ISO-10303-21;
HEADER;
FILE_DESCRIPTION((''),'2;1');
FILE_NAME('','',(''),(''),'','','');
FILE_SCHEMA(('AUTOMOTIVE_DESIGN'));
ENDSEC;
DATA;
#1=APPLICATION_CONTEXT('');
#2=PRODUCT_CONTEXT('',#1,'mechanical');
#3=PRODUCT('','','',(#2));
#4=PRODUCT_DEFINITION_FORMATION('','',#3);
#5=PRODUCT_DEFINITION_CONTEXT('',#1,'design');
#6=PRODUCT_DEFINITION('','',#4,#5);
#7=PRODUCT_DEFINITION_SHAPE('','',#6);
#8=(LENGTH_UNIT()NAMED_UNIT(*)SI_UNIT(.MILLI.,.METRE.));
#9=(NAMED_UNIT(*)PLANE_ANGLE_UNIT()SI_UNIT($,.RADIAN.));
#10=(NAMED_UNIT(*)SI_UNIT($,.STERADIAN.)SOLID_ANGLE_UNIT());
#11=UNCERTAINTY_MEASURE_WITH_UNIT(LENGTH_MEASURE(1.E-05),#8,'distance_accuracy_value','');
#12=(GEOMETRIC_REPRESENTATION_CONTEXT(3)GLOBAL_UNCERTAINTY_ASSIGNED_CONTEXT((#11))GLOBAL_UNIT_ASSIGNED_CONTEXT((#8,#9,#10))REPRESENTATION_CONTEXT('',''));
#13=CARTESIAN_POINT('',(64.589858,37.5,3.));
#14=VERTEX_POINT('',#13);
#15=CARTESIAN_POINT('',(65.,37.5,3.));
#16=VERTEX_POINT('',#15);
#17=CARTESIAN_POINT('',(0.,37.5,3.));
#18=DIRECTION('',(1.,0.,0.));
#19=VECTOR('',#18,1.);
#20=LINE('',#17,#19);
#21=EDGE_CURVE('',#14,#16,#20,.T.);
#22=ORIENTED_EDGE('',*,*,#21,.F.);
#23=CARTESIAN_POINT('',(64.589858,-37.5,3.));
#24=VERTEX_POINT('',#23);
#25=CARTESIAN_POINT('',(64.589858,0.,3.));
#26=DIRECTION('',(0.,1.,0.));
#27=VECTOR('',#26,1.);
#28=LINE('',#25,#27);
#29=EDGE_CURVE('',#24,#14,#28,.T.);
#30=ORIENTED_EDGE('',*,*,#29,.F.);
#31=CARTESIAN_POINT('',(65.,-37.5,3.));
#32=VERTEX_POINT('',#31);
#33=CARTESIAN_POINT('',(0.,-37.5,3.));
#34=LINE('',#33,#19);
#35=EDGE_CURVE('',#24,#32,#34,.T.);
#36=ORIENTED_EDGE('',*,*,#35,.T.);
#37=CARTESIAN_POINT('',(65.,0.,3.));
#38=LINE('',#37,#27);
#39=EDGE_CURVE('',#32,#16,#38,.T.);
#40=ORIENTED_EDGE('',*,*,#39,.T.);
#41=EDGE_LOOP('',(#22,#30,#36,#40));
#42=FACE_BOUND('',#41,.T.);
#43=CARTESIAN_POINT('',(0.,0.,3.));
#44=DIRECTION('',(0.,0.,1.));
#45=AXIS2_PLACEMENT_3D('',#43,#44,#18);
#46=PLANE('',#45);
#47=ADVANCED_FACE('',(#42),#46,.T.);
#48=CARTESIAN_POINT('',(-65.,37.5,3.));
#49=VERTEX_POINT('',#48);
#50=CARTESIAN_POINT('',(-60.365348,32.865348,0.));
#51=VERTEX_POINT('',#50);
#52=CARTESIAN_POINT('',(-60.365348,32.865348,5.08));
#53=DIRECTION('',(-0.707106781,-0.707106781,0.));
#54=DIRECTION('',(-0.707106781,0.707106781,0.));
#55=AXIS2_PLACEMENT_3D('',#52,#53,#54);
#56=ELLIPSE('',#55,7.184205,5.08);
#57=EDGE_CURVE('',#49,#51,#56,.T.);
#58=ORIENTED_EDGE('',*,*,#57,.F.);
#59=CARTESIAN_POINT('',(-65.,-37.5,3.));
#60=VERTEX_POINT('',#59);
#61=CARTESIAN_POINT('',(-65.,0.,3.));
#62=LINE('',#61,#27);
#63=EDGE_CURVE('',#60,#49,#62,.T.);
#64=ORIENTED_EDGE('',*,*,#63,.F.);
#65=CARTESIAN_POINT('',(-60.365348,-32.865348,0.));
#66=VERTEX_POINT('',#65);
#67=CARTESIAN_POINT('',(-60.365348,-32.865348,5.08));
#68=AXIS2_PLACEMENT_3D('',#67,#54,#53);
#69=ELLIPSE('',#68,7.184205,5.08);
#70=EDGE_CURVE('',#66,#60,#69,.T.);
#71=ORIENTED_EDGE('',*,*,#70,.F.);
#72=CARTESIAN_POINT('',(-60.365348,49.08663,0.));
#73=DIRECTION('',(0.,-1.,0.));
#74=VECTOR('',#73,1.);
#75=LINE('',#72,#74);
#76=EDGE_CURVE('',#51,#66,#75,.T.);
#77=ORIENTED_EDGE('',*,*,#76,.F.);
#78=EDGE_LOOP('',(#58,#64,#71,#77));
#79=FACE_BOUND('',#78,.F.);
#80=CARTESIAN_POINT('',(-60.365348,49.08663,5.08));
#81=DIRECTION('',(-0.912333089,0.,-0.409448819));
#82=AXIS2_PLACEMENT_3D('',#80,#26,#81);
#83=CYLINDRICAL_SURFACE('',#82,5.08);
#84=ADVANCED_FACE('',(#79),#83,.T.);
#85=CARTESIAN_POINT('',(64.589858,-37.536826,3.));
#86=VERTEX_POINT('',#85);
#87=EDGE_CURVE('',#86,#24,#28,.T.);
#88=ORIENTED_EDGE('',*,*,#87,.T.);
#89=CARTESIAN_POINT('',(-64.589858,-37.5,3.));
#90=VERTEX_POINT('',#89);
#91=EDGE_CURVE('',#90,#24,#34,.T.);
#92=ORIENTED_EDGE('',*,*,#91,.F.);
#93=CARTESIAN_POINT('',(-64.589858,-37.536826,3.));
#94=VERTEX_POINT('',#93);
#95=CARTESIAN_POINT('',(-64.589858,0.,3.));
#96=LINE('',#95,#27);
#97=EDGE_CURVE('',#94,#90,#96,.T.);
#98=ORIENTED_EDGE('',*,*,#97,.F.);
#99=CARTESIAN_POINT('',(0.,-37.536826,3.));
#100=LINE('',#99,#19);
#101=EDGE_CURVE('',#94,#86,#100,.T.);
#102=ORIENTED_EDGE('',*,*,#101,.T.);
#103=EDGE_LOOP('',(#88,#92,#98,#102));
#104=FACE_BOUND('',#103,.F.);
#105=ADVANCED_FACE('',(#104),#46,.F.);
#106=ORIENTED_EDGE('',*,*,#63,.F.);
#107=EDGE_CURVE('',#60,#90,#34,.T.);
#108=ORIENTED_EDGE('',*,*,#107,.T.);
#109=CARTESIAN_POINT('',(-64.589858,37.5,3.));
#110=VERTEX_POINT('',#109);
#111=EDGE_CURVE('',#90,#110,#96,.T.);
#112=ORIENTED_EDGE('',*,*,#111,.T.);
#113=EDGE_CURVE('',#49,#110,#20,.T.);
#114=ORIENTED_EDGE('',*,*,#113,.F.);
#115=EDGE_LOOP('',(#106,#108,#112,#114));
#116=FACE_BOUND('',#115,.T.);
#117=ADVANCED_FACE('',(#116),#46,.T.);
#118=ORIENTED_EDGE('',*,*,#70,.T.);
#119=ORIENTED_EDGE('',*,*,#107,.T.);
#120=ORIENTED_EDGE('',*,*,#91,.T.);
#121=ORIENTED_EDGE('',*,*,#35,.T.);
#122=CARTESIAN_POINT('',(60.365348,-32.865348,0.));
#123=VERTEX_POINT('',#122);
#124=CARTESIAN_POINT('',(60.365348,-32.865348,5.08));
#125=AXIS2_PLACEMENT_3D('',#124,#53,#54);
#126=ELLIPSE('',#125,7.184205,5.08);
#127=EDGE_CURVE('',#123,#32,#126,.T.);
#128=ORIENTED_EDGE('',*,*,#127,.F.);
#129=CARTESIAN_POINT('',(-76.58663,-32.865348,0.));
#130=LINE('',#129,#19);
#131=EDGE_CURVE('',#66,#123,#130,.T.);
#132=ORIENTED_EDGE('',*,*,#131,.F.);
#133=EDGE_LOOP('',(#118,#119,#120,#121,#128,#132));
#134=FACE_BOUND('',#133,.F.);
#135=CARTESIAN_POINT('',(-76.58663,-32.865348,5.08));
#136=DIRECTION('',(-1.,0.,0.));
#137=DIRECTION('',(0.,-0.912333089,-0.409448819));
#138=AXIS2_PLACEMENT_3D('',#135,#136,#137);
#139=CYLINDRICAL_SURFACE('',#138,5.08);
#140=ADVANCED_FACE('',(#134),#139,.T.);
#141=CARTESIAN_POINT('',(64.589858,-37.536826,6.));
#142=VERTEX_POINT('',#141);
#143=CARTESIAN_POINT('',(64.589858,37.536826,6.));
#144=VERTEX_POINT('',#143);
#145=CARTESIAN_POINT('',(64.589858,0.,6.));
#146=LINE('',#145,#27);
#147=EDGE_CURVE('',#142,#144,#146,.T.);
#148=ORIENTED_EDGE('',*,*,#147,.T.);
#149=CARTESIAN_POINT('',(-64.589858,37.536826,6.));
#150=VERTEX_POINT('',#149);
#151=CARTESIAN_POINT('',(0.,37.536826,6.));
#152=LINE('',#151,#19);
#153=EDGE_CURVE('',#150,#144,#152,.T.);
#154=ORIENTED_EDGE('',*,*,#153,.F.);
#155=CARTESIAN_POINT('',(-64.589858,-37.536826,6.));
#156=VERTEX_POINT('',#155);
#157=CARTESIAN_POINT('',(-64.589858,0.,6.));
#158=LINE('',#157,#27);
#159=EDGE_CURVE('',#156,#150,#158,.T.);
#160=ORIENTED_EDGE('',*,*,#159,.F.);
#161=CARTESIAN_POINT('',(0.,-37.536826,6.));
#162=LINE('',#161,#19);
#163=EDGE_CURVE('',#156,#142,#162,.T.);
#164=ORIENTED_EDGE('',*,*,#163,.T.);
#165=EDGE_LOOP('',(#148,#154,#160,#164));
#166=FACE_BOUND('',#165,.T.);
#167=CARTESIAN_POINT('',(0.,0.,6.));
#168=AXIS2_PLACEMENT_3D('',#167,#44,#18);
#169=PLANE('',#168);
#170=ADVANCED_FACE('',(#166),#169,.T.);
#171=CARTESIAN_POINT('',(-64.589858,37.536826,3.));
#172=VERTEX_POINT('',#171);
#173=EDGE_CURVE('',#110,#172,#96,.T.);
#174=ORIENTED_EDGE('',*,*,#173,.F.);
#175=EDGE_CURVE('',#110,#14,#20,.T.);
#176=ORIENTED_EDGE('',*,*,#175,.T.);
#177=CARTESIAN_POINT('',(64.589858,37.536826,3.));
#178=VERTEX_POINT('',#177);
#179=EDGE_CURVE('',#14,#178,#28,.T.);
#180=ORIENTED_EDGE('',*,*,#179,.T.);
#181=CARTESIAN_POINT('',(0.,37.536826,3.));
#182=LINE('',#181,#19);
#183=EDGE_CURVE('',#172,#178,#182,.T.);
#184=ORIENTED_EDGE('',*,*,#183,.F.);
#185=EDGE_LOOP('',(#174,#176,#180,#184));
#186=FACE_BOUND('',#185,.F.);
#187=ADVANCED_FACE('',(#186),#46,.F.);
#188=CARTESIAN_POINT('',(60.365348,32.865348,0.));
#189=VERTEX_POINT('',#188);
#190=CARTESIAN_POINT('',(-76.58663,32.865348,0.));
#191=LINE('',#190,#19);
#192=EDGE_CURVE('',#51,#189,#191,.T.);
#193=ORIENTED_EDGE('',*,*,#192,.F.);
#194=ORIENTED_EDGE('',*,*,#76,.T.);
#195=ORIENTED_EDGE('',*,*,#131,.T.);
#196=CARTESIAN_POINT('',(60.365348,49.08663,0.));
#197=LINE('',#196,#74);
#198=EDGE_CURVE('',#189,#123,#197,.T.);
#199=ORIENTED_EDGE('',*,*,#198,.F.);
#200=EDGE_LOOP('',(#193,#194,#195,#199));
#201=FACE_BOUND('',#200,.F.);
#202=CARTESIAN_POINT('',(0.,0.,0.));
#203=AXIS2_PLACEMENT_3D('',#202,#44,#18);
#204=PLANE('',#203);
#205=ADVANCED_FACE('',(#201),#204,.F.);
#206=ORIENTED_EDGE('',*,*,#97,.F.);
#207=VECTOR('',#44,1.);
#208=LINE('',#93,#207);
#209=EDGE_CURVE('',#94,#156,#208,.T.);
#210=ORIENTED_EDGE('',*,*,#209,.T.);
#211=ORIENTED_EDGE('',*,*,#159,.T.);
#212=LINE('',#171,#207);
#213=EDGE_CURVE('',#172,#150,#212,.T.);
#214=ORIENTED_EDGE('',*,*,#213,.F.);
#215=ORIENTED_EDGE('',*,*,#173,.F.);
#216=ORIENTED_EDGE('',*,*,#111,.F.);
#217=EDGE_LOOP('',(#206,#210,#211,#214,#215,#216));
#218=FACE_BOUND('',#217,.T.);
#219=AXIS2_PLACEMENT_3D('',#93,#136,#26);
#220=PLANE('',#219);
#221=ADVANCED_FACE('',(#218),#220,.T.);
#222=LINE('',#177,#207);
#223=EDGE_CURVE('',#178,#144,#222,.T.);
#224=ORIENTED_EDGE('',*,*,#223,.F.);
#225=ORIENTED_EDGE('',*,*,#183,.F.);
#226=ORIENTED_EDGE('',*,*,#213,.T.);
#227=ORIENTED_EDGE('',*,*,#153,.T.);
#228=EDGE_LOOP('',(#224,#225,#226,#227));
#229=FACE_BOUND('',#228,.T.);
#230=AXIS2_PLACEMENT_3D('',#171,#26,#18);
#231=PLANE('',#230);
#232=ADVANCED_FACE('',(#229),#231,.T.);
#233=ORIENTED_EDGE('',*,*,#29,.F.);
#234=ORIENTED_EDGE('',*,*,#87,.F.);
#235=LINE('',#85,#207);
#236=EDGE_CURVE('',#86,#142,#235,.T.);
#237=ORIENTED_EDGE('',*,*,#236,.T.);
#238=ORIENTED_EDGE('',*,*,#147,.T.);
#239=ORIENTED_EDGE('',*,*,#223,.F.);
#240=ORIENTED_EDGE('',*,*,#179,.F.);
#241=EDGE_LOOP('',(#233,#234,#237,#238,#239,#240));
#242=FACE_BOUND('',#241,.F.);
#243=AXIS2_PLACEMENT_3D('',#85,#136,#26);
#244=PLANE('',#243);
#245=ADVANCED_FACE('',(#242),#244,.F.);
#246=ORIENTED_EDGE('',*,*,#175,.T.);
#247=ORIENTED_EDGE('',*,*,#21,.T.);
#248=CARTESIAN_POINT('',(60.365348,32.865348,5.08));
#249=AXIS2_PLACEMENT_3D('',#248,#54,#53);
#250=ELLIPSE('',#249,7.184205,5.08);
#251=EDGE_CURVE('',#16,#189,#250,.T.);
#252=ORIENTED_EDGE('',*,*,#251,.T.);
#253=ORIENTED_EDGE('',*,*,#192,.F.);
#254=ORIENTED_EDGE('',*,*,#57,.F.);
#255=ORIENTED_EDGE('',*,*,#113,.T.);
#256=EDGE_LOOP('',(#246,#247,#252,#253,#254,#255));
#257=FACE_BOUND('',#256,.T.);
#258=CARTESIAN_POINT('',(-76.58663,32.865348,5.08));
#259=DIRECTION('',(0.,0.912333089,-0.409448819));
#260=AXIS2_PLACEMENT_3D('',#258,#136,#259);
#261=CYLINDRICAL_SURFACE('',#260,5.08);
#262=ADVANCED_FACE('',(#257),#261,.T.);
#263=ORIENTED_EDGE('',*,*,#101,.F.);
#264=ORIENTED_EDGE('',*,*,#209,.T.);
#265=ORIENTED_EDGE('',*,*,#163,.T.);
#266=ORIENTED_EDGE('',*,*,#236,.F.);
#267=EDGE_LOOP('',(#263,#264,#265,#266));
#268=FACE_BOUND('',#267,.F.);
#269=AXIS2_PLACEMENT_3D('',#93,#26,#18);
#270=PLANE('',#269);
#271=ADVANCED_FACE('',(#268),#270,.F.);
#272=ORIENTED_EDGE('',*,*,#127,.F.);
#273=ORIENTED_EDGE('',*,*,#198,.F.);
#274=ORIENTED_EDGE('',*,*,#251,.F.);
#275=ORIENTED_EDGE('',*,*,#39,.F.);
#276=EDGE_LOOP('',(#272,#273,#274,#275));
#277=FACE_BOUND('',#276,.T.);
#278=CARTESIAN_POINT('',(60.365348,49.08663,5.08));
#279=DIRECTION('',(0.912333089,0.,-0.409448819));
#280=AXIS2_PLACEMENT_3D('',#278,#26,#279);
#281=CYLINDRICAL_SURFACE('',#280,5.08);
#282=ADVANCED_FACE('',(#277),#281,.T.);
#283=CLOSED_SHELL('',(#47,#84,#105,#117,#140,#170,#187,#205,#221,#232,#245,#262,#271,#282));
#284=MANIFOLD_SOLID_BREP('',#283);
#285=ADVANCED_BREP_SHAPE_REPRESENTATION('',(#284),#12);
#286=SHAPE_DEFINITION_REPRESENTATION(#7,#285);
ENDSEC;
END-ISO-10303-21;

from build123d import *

# Parameters (mm, degrees)
F0_W        = 130
F0_H        = 75
F1_DEPTH    = 3
F2_T1_DEPTH = 153.1732604525
F2_T3_DEPTH = 98.1732604525
F4_W        = 129.1797161102
F4_H        = 75.0736519694
F5_DEPTH    = 3


# Not quite as in the source:
# - a fillet or chamfer that OpenCascade refuses, or shapes differently, is made with other operations: its cross-section is extruded or revolved along the edge and cut away or added


with BuildPart() as f1:
    # F0 (on Top) → F1 (new body)
    with BuildSketch(Plane.XY):
        Rectangle(F0_W, F0_H)
    extrude(amount=F1_DEPTH)

    # F2: fillet of radius 5.08 on 4 edges, made by hand

    # F2_s2 → F2_t1 (cut)
    with BuildSketch(Plane.YZ.offset(-76.5866302263)):
        with BuildLine():
            ThreePointArc((37.5, 3), (35.6257826579, 0.8154484409), (32.8653479095, 0))
            Line((32.8653479095, 0), (37.5, 0))
            Line((37.5, 0), (37.5, 3))
        make_face()
        with BuildLine():
            ThreePointArc((-37.5, 3), (-35.6257826579, 0.8154484409), (-32.8653479095, 0))
            Line((-32.8653479095, 0), (-37.5, 0))
            Line((-37.5, 0), (-37.5, 3))
        make_face()
    extrude(amount=F2_T1_DEPTH, mode=Mode.SUBTRACT)

    # F2_s4 → F2_t3 (cut)
    with BuildSketch(Plane.XZ.offset(-49.0866302263)):
        with BuildLine():
            ThreePointArc((65, 3), (63.1257826579, 0.8154484409), (60.3653479095, 0))
            Line((60.3653479095, 0), (65, 0))
            Line((65, 0), (65, 3))
        make_face()
        with BuildLine():
            ThreePointArc((-65, 3), (-63.1257826579, 0.8154484409), (-60.3653479095, 0))
            Line((-60.3653479095, 0), (-65, 0))
            Line((-65, 0), (-65, 3))
        make_face()
    extrude(amount=F2_T3_DEPTH, mode=Mode.SUBTRACT)

    # F4 (on face) → F5 (join)
    with BuildSketch(Plane.XY.offset(3)):
        Rectangle(F4_W, F4_H)
    extrude(amount=F5_DEPTH)


solid = f1.part
